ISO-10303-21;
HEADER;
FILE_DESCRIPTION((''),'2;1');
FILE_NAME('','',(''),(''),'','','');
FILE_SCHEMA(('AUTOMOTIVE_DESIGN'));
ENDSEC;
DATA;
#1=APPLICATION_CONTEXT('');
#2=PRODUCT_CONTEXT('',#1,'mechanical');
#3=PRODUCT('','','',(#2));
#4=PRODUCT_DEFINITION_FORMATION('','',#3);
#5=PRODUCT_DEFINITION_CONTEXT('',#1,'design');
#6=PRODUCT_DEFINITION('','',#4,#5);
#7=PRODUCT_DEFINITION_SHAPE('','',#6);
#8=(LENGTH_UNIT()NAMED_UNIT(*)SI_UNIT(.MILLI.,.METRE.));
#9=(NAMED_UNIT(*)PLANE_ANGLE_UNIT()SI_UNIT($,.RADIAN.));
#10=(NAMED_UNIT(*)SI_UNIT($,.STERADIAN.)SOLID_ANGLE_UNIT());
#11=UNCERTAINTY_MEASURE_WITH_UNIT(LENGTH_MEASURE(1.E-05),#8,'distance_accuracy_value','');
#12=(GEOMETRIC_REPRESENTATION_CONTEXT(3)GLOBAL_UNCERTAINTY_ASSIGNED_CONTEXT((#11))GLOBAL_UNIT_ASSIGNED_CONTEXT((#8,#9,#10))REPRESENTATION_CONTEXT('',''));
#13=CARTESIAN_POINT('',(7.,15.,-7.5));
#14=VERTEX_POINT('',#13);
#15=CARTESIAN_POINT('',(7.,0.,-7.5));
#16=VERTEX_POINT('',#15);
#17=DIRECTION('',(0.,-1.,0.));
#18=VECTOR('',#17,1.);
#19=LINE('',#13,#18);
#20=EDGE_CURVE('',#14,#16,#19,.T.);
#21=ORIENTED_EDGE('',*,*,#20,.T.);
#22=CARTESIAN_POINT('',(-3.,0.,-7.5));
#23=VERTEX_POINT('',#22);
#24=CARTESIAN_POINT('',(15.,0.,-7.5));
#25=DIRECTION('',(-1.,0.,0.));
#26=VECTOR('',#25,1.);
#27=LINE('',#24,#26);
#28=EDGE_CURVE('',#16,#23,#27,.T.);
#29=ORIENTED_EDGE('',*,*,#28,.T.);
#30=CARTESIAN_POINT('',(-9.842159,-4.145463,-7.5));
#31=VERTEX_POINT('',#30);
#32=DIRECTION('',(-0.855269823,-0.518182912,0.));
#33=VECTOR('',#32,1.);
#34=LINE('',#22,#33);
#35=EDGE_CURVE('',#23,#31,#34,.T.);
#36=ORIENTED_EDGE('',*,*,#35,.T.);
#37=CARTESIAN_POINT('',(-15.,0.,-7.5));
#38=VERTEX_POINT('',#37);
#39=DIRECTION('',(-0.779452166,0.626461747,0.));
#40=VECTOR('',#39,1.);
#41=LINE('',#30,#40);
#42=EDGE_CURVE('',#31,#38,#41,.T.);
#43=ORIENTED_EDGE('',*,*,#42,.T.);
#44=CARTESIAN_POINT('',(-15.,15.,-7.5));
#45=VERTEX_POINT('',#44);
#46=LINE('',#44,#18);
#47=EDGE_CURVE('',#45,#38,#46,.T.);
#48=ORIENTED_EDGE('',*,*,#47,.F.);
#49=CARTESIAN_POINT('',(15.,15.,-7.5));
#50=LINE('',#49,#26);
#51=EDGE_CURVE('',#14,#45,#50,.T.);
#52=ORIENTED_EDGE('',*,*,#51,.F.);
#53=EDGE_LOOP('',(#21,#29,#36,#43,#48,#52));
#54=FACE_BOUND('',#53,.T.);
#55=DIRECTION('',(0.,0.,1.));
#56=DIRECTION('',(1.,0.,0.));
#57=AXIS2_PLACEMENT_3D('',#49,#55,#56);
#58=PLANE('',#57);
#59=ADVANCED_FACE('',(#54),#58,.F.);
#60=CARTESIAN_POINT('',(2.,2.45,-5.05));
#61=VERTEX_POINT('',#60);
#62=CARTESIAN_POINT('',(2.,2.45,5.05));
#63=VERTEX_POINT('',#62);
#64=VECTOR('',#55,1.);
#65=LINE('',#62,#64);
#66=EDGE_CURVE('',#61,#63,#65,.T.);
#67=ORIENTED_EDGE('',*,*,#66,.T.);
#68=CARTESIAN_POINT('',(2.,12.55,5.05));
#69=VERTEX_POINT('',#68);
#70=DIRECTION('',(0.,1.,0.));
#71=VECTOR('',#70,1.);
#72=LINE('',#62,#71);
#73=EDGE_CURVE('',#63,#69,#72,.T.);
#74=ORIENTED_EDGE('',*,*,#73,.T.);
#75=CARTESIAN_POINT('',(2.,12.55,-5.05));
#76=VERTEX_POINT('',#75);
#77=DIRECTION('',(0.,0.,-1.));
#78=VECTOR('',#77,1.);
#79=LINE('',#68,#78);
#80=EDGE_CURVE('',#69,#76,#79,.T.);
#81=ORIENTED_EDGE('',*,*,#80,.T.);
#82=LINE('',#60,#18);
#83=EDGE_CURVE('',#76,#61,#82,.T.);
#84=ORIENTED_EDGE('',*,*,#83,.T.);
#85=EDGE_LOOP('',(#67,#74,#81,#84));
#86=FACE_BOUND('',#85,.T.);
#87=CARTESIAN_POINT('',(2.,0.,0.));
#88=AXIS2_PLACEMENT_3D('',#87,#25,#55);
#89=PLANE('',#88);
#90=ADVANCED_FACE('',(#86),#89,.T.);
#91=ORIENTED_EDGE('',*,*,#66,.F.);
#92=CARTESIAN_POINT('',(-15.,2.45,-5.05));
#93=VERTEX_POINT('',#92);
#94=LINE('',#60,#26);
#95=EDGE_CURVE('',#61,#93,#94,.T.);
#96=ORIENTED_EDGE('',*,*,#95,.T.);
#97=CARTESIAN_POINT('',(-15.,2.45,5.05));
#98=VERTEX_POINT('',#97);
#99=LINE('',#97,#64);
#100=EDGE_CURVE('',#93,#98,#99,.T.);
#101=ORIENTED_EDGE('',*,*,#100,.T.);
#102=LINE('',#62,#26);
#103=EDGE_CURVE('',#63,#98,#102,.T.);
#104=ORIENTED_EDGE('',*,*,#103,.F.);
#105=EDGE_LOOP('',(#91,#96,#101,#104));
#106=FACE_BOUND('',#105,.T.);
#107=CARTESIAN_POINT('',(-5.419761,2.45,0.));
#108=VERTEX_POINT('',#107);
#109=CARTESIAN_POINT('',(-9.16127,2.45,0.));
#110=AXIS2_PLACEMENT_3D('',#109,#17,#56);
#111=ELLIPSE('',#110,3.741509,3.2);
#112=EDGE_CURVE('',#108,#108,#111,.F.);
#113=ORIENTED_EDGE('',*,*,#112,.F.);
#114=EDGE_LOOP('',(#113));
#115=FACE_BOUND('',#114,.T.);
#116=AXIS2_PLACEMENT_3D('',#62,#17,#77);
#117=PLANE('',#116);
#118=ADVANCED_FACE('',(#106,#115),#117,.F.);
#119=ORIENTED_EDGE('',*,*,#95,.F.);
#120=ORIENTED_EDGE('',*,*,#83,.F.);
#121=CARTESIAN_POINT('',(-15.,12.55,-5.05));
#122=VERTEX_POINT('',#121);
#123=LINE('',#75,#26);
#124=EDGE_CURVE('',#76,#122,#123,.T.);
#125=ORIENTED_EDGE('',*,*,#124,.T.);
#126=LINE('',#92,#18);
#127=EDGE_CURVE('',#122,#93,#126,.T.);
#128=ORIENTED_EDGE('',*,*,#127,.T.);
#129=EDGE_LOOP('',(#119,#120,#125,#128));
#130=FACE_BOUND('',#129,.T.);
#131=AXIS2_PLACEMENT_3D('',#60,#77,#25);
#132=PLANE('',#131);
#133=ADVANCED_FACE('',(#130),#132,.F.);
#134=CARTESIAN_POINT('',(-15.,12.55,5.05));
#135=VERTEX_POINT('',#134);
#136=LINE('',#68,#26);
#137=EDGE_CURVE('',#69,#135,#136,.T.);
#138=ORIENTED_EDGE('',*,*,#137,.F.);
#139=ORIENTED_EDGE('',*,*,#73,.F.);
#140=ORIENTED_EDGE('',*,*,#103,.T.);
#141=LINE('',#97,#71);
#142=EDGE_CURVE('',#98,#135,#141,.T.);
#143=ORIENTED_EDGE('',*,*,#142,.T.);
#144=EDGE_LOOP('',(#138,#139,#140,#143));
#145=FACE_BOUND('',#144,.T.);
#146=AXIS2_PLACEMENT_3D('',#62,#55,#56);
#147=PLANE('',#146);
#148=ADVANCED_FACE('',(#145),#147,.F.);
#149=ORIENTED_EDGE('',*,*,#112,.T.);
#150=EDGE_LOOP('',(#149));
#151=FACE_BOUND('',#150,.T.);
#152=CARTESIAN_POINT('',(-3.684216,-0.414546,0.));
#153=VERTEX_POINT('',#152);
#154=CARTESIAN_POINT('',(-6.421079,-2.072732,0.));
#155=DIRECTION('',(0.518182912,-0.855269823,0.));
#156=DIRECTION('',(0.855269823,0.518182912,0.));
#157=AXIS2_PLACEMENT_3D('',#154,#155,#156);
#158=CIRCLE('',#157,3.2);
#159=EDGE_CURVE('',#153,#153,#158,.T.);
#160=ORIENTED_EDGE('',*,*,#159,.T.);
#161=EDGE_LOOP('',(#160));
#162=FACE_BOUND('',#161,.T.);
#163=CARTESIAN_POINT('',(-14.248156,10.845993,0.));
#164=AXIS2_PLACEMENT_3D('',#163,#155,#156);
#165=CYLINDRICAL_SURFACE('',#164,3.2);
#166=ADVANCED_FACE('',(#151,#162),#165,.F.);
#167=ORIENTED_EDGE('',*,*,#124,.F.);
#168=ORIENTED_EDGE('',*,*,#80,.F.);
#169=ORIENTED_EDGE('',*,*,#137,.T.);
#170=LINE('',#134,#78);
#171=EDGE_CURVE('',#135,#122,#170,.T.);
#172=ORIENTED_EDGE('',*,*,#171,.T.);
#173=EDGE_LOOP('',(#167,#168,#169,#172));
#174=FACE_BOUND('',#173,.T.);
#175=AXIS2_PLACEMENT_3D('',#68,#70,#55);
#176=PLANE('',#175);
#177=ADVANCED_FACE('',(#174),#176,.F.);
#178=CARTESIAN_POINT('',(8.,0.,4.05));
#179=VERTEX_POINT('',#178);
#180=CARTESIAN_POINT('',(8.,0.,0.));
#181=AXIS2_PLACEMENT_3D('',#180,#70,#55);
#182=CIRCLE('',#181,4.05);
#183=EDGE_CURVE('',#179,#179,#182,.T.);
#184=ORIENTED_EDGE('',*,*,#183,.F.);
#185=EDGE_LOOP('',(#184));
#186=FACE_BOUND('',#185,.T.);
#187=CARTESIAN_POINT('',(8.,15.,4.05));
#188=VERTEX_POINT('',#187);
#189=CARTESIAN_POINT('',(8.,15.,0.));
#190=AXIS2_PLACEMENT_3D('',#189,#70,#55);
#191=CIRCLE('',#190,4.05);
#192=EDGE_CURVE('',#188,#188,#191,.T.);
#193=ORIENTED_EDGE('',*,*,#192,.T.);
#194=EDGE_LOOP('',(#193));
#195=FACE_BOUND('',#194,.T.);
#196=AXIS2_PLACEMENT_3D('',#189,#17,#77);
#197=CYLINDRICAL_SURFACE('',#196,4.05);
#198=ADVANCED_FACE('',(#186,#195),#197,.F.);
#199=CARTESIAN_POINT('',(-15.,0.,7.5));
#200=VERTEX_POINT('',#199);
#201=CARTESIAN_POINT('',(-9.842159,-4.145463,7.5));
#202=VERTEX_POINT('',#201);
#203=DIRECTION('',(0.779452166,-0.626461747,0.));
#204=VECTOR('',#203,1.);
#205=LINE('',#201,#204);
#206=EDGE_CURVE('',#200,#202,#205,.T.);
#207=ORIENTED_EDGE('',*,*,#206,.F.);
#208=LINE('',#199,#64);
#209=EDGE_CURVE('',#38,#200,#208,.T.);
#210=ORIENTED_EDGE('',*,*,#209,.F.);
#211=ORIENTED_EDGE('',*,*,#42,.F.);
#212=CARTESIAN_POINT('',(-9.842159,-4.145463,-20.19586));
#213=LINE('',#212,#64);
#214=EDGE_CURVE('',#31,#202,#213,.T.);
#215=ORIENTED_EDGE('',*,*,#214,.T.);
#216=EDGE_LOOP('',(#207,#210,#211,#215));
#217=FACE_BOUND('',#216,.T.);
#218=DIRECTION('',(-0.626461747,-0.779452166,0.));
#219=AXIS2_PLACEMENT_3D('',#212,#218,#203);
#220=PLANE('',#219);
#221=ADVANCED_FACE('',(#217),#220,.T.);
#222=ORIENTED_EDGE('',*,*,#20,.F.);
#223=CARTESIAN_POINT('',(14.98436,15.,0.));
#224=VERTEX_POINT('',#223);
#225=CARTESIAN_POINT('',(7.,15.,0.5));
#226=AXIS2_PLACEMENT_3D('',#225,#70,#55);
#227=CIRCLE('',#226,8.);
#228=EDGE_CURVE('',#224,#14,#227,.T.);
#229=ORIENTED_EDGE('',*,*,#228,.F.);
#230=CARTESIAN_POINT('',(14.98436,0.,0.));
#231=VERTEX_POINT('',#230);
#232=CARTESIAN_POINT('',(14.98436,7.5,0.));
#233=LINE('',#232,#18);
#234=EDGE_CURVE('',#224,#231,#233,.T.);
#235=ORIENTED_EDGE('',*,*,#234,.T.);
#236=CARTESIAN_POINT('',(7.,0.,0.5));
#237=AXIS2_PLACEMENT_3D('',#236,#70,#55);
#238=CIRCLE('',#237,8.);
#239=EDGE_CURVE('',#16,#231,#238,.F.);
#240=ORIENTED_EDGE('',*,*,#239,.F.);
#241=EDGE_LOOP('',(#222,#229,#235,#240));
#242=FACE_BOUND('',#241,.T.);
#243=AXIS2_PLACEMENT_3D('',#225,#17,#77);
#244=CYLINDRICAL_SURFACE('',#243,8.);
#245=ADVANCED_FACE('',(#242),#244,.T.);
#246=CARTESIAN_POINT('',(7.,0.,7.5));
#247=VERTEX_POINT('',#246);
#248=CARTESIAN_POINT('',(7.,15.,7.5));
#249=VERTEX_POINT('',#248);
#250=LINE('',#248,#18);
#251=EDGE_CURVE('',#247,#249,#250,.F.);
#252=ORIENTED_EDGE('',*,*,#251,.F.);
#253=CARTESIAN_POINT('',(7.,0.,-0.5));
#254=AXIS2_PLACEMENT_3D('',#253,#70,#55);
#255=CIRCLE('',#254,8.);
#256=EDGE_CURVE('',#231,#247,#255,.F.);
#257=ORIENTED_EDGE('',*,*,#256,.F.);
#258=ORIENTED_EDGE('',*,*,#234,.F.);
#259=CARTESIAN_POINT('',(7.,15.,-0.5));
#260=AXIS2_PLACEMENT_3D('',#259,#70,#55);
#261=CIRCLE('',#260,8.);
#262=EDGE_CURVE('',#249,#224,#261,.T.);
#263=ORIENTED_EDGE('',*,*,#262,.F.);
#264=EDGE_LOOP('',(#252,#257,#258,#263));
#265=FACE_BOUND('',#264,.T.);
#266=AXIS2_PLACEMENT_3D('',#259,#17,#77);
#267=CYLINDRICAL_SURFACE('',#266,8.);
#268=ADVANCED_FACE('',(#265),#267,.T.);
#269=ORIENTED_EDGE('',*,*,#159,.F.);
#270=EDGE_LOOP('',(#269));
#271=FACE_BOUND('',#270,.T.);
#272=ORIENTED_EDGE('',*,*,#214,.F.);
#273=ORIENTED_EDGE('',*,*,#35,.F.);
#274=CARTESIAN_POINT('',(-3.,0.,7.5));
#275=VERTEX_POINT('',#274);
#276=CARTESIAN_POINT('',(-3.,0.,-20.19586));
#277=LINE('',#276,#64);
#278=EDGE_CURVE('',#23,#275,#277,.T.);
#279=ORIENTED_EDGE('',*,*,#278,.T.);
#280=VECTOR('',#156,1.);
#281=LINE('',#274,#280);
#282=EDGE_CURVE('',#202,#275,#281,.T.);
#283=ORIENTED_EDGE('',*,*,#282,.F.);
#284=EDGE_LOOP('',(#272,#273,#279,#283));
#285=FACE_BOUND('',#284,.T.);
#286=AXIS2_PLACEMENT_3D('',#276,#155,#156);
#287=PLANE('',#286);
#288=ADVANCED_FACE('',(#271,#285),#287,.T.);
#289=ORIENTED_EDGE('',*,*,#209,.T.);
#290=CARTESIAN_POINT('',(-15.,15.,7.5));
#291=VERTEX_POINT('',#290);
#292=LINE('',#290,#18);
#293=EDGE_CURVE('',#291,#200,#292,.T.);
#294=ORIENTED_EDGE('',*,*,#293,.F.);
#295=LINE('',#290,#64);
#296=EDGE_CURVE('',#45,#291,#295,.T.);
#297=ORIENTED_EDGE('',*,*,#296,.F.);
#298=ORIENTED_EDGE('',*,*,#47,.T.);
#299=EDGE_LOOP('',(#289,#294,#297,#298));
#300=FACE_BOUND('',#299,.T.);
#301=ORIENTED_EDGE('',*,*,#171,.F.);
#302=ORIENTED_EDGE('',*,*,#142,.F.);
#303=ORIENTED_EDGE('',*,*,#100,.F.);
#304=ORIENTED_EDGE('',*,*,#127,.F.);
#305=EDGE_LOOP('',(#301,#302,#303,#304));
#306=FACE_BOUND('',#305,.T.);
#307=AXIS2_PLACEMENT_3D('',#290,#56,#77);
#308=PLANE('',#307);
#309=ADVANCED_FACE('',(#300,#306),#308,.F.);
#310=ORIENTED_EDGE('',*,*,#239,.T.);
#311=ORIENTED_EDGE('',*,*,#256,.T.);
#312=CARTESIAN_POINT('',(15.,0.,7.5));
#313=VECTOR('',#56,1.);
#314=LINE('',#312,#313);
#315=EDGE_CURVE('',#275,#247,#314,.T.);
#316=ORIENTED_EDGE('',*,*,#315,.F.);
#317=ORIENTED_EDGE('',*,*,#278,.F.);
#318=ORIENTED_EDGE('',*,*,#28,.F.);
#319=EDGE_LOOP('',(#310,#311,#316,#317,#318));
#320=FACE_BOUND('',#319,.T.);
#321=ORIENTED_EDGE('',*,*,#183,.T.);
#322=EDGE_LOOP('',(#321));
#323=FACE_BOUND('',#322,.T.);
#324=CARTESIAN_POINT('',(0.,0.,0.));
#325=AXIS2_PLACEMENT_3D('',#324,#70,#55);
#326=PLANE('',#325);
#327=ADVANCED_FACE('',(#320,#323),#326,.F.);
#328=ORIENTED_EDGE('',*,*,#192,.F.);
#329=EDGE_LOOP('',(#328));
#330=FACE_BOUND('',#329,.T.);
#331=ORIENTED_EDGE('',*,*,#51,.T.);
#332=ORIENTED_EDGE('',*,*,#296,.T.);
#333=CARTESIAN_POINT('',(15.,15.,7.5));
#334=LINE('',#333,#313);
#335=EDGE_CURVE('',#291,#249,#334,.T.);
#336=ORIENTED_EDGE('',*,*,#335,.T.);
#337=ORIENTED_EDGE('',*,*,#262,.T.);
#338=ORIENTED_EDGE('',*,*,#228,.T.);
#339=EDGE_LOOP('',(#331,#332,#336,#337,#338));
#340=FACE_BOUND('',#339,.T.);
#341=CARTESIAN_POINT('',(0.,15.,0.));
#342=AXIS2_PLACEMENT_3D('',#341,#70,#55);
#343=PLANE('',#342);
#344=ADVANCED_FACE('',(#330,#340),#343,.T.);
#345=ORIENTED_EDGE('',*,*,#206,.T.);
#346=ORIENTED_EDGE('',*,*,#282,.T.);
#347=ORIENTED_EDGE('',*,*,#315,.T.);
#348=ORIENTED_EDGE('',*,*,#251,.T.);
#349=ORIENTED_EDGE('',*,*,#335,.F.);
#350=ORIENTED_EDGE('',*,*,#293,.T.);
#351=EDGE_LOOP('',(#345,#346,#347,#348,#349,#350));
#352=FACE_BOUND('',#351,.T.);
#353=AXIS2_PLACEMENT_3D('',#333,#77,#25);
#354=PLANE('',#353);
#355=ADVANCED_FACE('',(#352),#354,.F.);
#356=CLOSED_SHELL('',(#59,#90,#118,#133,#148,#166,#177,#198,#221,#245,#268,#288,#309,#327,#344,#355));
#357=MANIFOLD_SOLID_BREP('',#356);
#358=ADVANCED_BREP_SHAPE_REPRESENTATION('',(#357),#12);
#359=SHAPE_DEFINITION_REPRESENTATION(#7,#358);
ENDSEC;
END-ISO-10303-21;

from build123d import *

# Parameters (mm, degrees)
SKETCH1_W           = 30
SKETCH1_H           = 15
SKETCH1_R           = 4.05
BOSS_EXTRUDE1_DEPTH = 15
FILLET1_R           = 8
SKETCH2_W           = 10.1
SKETCH2_H           = 10.1
CUT_EXTRUDE1_DEPTH  = 17
BOSS_EXTRUDE2_DEPTH = 15
CUT_EXTRUDE2_REACH  = 24.191
SKETCH4_R           = 3.2


with BuildPart() as part:
    # Sketch1 → Boss-Extrude1 (new body)
    with BuildSketch(Plane(origin=(0, 0, 0), x_dir=(1, 0, 0), z_dir=(0, 1, 0))):
        Rectangle(SKETCH1_W, SKETCH1_H)
        with Locations(Location((8, 0, 0), (0, 0, 270))):
            Circle(SKETCH1_R, mode=Mode.SUBTRACT)
    extrude(amount=BOSS_EXTRUDE1_DEPTH)

    # Fillet1
    # the kernel refuses this fillet: 8 mm, written as the material it takes off along each edge
    with BuildSketch(Plane(origin=(15, -20, -7.5), x_dir=(-1, 0, 0), z_dir=(0, 1, 0))) as fillet1_piece_1:
        with BuildLine():
            CenterArc((FILLET1_R, FILLET1_R), FILLET1_R, 180, 90)
            Line((0, FILLET1_R), (0, 0))
            Line((0, 0), (FILLET1_R, 0))
        make_face()
    extrude(amount=55, mode=Mode.SUBTRACT)
    with BuildSketch(Plane(origin=(15, -20, 7.5), x_dir=(-1, 0, 0), z_dir=(0, 1, 0))) as fillet1_piece_2:
        with BuildLine():
            CenterArc((FILLET1_R, -FILLET1_R), FILLET1_R, 90, 90)
            Line((0, -FILLET1_R), (0, 0))
            Line((0, 0), (FILLET1_R, 0))
        make_face()
    extrude(amount=55, mode=Mode.SUBTRACT)

    # Sketch2 → Cut-Extrude1 (cut)
    with BuildSketch(Plane.ZY.offset(15)):
        with Locations((0, 7.5)):
            Rectangle(SKETCH2_W, SKETCH2_H)
    extrude(amount=-CUT_EXTRUDE1_DEPTH, mode=Mode.SUBTRACT)

    # Sketch3 → Boss-Extrude2 (add)
    with BuildSketch(Plane.XY.offset(7.5)):
        Polygon((-3, 0), (-9.842158581, -4.145463298), (-15, 0), align=None)
    extrude(amount=-BOSS_EXTRUDE2_DEPTH)

    # Cut-Extrude2: up to this plane
    cut_extrude2_end = Plane(origin=(2, 2.45, 5.05), z_dir=(0, -1, 0))
    # Sketch4 → Cut-Extrude2 (cut, up to the surface)
    with BuildSketch(Plane(origin=(-0.805540592, 1.329558622, 0), x_dir=(0, 0, -1), z_dir=(0.5181829122191232, -0.8552698226198026, 0)), mode=Mode.PRIVATE) as cut_extrude2_sk1:
        with Locations(Location((0, -6.565809468, 0), (0, 0, 90))):
            Circle(SKETCH4_R)
    cut_extrude2_tool1 = split(extrude(cut_extrude2_sk1.sketch, amount=-CUT_EXTRUDE2_REACH, mode=Mode.PRIVATE), bisect_by=cut_extrude2_end, keep=Keep.BOTH, mode=Mode.PRIVATE)
    add(cut_extrude2_tool1.solids().sort_by_distance((-6.421079, -2.072732, 0))[0], mode=Mode.SUBTRACT)


solid = part.part
